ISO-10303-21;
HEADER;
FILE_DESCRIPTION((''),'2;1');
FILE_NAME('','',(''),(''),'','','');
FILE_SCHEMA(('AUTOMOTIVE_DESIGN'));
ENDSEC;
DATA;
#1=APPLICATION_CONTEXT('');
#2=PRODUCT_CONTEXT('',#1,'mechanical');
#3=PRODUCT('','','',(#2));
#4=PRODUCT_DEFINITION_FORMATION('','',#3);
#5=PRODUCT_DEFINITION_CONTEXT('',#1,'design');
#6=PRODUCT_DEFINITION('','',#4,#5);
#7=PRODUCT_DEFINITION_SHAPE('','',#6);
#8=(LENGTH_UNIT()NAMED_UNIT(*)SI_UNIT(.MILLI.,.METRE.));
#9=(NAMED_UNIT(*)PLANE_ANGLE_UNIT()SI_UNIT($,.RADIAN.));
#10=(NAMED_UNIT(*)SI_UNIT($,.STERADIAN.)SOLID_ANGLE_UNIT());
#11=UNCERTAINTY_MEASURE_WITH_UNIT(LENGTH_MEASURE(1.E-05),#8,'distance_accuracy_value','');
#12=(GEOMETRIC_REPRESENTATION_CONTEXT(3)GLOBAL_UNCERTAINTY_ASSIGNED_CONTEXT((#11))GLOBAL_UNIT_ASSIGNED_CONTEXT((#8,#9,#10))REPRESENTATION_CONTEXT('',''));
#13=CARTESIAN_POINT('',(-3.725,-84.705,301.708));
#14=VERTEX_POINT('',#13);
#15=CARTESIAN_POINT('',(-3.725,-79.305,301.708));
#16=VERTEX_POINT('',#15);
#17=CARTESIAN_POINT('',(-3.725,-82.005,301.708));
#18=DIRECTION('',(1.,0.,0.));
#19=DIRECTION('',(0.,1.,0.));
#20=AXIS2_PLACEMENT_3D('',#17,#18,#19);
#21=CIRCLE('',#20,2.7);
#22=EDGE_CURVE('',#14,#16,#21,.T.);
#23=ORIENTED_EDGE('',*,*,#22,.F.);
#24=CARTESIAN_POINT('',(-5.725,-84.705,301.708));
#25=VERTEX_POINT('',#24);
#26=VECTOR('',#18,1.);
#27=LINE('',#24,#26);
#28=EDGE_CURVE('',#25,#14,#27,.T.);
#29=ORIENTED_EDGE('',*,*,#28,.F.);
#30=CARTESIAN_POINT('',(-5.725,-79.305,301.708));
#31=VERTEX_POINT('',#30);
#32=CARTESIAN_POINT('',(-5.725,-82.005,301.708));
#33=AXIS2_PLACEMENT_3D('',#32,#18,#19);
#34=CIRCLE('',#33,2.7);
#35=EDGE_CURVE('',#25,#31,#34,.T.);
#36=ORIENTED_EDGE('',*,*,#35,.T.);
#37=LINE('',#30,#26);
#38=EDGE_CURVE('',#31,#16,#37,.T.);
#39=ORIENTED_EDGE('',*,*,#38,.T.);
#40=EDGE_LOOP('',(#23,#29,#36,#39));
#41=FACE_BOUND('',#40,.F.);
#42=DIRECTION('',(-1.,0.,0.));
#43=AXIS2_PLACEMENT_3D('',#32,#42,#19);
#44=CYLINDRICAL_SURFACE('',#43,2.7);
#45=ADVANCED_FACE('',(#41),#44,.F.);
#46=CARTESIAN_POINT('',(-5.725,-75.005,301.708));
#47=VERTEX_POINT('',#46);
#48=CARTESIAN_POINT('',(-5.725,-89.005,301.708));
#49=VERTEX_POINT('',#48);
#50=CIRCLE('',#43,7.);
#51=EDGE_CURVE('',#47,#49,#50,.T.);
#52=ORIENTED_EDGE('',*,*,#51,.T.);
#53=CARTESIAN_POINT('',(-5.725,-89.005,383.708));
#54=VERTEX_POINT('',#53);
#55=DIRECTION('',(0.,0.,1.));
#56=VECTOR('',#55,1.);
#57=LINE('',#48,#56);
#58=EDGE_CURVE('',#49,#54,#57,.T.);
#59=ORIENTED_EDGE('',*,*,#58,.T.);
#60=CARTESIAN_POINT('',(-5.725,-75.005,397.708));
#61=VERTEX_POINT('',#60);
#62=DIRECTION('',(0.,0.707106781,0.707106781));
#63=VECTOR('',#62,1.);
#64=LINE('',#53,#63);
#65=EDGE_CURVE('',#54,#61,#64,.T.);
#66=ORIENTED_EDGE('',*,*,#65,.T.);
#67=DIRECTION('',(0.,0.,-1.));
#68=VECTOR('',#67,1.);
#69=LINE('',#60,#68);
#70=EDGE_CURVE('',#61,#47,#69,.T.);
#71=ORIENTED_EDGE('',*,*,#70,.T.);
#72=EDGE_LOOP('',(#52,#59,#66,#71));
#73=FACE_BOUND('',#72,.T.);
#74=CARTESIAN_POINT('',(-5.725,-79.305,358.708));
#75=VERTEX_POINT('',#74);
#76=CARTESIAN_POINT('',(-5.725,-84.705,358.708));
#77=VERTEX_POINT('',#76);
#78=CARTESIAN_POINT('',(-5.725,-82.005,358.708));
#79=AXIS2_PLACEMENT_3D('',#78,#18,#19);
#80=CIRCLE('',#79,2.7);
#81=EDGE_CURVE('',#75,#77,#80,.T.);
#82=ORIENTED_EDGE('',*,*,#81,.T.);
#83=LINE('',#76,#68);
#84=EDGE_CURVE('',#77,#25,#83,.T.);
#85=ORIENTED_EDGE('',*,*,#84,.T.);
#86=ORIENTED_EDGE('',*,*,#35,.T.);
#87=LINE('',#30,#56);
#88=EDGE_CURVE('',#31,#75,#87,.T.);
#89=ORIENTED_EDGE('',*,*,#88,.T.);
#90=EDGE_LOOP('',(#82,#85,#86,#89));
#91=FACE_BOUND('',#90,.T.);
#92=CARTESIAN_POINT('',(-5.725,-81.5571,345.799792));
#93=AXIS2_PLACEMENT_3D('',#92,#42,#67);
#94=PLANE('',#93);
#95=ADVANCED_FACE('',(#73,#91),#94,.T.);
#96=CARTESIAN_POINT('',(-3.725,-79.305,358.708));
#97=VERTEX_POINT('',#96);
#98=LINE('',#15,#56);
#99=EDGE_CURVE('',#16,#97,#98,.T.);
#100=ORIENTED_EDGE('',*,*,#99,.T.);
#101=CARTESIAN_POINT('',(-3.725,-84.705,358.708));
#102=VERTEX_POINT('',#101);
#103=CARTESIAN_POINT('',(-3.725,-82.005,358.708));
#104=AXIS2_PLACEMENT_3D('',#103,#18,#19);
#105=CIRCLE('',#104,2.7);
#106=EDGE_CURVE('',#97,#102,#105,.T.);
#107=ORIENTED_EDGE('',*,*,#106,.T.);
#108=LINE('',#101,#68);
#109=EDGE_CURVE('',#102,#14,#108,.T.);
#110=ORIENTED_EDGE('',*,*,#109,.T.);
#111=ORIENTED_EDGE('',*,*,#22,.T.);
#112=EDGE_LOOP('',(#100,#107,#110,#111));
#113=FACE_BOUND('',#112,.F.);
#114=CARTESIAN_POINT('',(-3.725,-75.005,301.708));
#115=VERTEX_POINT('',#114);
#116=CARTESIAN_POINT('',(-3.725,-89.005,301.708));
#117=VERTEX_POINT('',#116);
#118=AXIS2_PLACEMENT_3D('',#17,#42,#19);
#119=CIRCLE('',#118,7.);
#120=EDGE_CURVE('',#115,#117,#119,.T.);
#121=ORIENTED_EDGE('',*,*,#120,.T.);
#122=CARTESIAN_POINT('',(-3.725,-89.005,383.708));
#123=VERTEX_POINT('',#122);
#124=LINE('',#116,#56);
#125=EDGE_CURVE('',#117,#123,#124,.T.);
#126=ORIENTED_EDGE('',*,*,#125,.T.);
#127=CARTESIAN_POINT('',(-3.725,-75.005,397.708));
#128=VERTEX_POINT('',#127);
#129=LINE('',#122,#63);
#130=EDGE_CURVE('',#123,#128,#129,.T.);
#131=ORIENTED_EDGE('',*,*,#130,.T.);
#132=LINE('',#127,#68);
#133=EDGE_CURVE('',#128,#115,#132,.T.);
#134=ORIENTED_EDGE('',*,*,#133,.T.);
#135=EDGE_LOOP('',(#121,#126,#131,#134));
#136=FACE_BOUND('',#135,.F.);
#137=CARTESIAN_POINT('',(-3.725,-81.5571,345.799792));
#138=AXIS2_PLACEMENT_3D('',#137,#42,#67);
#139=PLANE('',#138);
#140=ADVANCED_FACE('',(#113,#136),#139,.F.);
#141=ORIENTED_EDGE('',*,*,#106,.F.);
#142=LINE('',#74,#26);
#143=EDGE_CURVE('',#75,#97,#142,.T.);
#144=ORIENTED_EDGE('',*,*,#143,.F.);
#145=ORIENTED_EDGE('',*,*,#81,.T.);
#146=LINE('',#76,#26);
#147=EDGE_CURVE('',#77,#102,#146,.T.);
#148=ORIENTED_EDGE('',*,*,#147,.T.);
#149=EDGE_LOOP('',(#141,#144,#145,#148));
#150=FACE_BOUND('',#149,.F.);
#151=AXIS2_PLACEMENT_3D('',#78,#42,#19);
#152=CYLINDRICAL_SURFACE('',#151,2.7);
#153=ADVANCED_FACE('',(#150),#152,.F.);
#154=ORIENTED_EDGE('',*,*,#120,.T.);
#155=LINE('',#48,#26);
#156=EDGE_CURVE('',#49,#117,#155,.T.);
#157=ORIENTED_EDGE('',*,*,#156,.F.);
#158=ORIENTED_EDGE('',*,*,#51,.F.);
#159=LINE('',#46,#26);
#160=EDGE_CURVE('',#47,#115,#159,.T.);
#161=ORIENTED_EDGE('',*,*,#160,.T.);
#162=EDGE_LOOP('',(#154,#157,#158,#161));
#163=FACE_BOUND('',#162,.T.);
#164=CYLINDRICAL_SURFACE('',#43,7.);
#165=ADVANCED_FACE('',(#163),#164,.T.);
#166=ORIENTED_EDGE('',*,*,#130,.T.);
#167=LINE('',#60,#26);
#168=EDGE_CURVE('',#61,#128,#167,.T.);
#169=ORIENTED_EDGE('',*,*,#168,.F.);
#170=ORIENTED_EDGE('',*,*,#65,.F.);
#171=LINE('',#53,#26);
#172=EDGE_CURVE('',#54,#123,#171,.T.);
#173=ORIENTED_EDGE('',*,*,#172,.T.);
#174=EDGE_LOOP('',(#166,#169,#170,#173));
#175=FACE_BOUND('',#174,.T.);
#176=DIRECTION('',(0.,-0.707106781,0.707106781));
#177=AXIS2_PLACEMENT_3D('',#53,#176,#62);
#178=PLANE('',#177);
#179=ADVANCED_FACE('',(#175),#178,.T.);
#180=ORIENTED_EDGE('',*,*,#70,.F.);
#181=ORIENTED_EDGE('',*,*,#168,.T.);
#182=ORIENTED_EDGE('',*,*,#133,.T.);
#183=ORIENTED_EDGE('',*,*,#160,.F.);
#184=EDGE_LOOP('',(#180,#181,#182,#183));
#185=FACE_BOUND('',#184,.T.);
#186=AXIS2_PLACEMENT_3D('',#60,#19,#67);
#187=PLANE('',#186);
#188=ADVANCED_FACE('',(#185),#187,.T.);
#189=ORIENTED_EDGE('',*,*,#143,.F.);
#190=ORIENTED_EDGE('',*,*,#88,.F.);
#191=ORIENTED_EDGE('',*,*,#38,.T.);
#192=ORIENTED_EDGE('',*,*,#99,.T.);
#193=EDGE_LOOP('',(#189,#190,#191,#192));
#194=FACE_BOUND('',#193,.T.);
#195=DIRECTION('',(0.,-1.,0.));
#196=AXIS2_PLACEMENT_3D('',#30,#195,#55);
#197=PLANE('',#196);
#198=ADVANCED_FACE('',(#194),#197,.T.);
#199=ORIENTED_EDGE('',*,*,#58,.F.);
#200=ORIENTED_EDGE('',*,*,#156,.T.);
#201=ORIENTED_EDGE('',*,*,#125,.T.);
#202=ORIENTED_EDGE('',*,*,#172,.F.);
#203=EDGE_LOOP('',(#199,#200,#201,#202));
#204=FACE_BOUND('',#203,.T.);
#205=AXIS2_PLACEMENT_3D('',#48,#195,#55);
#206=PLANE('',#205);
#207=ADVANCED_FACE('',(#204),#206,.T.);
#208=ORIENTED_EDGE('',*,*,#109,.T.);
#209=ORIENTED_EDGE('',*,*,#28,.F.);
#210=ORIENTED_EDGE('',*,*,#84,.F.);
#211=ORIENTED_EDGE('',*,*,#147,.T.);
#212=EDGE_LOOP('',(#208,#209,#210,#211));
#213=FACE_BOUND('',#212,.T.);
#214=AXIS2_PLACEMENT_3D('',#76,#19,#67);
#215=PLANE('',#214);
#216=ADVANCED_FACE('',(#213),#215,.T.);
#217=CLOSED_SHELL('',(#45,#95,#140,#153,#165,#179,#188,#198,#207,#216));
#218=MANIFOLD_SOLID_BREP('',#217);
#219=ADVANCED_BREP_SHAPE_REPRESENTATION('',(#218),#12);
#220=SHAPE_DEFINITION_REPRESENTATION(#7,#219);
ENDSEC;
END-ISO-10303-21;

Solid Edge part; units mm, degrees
sketch "Sketch1" plane through (-5.725, 0, 0) normal (1, 0, 0) x (0, 1, 0)
  arc A0 (-75.005, 301.708) -> (-89.005, 301.708) centre (-82.005, 301.708) cw
  line L0 (-89.005, 301.708) -> (-89.005, 383.708)
  line L1 (-89.005, 383.708) -> (-75.005, 397.708)
  line L2 (-75.005, 397.708) -> (-75.005, 301.708)
  line L3 (-79.305, 301.708) -> (-79.305, 358.708)
  arc A1 (-84.705, 301.708) -> (-79.305, 301.708) centre (-82.005, 301.708) ccw
  line L4 (-84.705, 358.708) -> (-84.705, 301.708)
  arc A2 (-79.305, 358.708) -> (-84.705, 358.708) centre (-82.005, 358.708) ccw
  dimension "D1" = 96
  dimension "D2" = 82
extrude "ExtrudedProtrusion_1" add sketch "Sketch1" along normal blind 2
extrude "Cutout1" [suppressed]
properties material "ABS Plastic, medium impact"
